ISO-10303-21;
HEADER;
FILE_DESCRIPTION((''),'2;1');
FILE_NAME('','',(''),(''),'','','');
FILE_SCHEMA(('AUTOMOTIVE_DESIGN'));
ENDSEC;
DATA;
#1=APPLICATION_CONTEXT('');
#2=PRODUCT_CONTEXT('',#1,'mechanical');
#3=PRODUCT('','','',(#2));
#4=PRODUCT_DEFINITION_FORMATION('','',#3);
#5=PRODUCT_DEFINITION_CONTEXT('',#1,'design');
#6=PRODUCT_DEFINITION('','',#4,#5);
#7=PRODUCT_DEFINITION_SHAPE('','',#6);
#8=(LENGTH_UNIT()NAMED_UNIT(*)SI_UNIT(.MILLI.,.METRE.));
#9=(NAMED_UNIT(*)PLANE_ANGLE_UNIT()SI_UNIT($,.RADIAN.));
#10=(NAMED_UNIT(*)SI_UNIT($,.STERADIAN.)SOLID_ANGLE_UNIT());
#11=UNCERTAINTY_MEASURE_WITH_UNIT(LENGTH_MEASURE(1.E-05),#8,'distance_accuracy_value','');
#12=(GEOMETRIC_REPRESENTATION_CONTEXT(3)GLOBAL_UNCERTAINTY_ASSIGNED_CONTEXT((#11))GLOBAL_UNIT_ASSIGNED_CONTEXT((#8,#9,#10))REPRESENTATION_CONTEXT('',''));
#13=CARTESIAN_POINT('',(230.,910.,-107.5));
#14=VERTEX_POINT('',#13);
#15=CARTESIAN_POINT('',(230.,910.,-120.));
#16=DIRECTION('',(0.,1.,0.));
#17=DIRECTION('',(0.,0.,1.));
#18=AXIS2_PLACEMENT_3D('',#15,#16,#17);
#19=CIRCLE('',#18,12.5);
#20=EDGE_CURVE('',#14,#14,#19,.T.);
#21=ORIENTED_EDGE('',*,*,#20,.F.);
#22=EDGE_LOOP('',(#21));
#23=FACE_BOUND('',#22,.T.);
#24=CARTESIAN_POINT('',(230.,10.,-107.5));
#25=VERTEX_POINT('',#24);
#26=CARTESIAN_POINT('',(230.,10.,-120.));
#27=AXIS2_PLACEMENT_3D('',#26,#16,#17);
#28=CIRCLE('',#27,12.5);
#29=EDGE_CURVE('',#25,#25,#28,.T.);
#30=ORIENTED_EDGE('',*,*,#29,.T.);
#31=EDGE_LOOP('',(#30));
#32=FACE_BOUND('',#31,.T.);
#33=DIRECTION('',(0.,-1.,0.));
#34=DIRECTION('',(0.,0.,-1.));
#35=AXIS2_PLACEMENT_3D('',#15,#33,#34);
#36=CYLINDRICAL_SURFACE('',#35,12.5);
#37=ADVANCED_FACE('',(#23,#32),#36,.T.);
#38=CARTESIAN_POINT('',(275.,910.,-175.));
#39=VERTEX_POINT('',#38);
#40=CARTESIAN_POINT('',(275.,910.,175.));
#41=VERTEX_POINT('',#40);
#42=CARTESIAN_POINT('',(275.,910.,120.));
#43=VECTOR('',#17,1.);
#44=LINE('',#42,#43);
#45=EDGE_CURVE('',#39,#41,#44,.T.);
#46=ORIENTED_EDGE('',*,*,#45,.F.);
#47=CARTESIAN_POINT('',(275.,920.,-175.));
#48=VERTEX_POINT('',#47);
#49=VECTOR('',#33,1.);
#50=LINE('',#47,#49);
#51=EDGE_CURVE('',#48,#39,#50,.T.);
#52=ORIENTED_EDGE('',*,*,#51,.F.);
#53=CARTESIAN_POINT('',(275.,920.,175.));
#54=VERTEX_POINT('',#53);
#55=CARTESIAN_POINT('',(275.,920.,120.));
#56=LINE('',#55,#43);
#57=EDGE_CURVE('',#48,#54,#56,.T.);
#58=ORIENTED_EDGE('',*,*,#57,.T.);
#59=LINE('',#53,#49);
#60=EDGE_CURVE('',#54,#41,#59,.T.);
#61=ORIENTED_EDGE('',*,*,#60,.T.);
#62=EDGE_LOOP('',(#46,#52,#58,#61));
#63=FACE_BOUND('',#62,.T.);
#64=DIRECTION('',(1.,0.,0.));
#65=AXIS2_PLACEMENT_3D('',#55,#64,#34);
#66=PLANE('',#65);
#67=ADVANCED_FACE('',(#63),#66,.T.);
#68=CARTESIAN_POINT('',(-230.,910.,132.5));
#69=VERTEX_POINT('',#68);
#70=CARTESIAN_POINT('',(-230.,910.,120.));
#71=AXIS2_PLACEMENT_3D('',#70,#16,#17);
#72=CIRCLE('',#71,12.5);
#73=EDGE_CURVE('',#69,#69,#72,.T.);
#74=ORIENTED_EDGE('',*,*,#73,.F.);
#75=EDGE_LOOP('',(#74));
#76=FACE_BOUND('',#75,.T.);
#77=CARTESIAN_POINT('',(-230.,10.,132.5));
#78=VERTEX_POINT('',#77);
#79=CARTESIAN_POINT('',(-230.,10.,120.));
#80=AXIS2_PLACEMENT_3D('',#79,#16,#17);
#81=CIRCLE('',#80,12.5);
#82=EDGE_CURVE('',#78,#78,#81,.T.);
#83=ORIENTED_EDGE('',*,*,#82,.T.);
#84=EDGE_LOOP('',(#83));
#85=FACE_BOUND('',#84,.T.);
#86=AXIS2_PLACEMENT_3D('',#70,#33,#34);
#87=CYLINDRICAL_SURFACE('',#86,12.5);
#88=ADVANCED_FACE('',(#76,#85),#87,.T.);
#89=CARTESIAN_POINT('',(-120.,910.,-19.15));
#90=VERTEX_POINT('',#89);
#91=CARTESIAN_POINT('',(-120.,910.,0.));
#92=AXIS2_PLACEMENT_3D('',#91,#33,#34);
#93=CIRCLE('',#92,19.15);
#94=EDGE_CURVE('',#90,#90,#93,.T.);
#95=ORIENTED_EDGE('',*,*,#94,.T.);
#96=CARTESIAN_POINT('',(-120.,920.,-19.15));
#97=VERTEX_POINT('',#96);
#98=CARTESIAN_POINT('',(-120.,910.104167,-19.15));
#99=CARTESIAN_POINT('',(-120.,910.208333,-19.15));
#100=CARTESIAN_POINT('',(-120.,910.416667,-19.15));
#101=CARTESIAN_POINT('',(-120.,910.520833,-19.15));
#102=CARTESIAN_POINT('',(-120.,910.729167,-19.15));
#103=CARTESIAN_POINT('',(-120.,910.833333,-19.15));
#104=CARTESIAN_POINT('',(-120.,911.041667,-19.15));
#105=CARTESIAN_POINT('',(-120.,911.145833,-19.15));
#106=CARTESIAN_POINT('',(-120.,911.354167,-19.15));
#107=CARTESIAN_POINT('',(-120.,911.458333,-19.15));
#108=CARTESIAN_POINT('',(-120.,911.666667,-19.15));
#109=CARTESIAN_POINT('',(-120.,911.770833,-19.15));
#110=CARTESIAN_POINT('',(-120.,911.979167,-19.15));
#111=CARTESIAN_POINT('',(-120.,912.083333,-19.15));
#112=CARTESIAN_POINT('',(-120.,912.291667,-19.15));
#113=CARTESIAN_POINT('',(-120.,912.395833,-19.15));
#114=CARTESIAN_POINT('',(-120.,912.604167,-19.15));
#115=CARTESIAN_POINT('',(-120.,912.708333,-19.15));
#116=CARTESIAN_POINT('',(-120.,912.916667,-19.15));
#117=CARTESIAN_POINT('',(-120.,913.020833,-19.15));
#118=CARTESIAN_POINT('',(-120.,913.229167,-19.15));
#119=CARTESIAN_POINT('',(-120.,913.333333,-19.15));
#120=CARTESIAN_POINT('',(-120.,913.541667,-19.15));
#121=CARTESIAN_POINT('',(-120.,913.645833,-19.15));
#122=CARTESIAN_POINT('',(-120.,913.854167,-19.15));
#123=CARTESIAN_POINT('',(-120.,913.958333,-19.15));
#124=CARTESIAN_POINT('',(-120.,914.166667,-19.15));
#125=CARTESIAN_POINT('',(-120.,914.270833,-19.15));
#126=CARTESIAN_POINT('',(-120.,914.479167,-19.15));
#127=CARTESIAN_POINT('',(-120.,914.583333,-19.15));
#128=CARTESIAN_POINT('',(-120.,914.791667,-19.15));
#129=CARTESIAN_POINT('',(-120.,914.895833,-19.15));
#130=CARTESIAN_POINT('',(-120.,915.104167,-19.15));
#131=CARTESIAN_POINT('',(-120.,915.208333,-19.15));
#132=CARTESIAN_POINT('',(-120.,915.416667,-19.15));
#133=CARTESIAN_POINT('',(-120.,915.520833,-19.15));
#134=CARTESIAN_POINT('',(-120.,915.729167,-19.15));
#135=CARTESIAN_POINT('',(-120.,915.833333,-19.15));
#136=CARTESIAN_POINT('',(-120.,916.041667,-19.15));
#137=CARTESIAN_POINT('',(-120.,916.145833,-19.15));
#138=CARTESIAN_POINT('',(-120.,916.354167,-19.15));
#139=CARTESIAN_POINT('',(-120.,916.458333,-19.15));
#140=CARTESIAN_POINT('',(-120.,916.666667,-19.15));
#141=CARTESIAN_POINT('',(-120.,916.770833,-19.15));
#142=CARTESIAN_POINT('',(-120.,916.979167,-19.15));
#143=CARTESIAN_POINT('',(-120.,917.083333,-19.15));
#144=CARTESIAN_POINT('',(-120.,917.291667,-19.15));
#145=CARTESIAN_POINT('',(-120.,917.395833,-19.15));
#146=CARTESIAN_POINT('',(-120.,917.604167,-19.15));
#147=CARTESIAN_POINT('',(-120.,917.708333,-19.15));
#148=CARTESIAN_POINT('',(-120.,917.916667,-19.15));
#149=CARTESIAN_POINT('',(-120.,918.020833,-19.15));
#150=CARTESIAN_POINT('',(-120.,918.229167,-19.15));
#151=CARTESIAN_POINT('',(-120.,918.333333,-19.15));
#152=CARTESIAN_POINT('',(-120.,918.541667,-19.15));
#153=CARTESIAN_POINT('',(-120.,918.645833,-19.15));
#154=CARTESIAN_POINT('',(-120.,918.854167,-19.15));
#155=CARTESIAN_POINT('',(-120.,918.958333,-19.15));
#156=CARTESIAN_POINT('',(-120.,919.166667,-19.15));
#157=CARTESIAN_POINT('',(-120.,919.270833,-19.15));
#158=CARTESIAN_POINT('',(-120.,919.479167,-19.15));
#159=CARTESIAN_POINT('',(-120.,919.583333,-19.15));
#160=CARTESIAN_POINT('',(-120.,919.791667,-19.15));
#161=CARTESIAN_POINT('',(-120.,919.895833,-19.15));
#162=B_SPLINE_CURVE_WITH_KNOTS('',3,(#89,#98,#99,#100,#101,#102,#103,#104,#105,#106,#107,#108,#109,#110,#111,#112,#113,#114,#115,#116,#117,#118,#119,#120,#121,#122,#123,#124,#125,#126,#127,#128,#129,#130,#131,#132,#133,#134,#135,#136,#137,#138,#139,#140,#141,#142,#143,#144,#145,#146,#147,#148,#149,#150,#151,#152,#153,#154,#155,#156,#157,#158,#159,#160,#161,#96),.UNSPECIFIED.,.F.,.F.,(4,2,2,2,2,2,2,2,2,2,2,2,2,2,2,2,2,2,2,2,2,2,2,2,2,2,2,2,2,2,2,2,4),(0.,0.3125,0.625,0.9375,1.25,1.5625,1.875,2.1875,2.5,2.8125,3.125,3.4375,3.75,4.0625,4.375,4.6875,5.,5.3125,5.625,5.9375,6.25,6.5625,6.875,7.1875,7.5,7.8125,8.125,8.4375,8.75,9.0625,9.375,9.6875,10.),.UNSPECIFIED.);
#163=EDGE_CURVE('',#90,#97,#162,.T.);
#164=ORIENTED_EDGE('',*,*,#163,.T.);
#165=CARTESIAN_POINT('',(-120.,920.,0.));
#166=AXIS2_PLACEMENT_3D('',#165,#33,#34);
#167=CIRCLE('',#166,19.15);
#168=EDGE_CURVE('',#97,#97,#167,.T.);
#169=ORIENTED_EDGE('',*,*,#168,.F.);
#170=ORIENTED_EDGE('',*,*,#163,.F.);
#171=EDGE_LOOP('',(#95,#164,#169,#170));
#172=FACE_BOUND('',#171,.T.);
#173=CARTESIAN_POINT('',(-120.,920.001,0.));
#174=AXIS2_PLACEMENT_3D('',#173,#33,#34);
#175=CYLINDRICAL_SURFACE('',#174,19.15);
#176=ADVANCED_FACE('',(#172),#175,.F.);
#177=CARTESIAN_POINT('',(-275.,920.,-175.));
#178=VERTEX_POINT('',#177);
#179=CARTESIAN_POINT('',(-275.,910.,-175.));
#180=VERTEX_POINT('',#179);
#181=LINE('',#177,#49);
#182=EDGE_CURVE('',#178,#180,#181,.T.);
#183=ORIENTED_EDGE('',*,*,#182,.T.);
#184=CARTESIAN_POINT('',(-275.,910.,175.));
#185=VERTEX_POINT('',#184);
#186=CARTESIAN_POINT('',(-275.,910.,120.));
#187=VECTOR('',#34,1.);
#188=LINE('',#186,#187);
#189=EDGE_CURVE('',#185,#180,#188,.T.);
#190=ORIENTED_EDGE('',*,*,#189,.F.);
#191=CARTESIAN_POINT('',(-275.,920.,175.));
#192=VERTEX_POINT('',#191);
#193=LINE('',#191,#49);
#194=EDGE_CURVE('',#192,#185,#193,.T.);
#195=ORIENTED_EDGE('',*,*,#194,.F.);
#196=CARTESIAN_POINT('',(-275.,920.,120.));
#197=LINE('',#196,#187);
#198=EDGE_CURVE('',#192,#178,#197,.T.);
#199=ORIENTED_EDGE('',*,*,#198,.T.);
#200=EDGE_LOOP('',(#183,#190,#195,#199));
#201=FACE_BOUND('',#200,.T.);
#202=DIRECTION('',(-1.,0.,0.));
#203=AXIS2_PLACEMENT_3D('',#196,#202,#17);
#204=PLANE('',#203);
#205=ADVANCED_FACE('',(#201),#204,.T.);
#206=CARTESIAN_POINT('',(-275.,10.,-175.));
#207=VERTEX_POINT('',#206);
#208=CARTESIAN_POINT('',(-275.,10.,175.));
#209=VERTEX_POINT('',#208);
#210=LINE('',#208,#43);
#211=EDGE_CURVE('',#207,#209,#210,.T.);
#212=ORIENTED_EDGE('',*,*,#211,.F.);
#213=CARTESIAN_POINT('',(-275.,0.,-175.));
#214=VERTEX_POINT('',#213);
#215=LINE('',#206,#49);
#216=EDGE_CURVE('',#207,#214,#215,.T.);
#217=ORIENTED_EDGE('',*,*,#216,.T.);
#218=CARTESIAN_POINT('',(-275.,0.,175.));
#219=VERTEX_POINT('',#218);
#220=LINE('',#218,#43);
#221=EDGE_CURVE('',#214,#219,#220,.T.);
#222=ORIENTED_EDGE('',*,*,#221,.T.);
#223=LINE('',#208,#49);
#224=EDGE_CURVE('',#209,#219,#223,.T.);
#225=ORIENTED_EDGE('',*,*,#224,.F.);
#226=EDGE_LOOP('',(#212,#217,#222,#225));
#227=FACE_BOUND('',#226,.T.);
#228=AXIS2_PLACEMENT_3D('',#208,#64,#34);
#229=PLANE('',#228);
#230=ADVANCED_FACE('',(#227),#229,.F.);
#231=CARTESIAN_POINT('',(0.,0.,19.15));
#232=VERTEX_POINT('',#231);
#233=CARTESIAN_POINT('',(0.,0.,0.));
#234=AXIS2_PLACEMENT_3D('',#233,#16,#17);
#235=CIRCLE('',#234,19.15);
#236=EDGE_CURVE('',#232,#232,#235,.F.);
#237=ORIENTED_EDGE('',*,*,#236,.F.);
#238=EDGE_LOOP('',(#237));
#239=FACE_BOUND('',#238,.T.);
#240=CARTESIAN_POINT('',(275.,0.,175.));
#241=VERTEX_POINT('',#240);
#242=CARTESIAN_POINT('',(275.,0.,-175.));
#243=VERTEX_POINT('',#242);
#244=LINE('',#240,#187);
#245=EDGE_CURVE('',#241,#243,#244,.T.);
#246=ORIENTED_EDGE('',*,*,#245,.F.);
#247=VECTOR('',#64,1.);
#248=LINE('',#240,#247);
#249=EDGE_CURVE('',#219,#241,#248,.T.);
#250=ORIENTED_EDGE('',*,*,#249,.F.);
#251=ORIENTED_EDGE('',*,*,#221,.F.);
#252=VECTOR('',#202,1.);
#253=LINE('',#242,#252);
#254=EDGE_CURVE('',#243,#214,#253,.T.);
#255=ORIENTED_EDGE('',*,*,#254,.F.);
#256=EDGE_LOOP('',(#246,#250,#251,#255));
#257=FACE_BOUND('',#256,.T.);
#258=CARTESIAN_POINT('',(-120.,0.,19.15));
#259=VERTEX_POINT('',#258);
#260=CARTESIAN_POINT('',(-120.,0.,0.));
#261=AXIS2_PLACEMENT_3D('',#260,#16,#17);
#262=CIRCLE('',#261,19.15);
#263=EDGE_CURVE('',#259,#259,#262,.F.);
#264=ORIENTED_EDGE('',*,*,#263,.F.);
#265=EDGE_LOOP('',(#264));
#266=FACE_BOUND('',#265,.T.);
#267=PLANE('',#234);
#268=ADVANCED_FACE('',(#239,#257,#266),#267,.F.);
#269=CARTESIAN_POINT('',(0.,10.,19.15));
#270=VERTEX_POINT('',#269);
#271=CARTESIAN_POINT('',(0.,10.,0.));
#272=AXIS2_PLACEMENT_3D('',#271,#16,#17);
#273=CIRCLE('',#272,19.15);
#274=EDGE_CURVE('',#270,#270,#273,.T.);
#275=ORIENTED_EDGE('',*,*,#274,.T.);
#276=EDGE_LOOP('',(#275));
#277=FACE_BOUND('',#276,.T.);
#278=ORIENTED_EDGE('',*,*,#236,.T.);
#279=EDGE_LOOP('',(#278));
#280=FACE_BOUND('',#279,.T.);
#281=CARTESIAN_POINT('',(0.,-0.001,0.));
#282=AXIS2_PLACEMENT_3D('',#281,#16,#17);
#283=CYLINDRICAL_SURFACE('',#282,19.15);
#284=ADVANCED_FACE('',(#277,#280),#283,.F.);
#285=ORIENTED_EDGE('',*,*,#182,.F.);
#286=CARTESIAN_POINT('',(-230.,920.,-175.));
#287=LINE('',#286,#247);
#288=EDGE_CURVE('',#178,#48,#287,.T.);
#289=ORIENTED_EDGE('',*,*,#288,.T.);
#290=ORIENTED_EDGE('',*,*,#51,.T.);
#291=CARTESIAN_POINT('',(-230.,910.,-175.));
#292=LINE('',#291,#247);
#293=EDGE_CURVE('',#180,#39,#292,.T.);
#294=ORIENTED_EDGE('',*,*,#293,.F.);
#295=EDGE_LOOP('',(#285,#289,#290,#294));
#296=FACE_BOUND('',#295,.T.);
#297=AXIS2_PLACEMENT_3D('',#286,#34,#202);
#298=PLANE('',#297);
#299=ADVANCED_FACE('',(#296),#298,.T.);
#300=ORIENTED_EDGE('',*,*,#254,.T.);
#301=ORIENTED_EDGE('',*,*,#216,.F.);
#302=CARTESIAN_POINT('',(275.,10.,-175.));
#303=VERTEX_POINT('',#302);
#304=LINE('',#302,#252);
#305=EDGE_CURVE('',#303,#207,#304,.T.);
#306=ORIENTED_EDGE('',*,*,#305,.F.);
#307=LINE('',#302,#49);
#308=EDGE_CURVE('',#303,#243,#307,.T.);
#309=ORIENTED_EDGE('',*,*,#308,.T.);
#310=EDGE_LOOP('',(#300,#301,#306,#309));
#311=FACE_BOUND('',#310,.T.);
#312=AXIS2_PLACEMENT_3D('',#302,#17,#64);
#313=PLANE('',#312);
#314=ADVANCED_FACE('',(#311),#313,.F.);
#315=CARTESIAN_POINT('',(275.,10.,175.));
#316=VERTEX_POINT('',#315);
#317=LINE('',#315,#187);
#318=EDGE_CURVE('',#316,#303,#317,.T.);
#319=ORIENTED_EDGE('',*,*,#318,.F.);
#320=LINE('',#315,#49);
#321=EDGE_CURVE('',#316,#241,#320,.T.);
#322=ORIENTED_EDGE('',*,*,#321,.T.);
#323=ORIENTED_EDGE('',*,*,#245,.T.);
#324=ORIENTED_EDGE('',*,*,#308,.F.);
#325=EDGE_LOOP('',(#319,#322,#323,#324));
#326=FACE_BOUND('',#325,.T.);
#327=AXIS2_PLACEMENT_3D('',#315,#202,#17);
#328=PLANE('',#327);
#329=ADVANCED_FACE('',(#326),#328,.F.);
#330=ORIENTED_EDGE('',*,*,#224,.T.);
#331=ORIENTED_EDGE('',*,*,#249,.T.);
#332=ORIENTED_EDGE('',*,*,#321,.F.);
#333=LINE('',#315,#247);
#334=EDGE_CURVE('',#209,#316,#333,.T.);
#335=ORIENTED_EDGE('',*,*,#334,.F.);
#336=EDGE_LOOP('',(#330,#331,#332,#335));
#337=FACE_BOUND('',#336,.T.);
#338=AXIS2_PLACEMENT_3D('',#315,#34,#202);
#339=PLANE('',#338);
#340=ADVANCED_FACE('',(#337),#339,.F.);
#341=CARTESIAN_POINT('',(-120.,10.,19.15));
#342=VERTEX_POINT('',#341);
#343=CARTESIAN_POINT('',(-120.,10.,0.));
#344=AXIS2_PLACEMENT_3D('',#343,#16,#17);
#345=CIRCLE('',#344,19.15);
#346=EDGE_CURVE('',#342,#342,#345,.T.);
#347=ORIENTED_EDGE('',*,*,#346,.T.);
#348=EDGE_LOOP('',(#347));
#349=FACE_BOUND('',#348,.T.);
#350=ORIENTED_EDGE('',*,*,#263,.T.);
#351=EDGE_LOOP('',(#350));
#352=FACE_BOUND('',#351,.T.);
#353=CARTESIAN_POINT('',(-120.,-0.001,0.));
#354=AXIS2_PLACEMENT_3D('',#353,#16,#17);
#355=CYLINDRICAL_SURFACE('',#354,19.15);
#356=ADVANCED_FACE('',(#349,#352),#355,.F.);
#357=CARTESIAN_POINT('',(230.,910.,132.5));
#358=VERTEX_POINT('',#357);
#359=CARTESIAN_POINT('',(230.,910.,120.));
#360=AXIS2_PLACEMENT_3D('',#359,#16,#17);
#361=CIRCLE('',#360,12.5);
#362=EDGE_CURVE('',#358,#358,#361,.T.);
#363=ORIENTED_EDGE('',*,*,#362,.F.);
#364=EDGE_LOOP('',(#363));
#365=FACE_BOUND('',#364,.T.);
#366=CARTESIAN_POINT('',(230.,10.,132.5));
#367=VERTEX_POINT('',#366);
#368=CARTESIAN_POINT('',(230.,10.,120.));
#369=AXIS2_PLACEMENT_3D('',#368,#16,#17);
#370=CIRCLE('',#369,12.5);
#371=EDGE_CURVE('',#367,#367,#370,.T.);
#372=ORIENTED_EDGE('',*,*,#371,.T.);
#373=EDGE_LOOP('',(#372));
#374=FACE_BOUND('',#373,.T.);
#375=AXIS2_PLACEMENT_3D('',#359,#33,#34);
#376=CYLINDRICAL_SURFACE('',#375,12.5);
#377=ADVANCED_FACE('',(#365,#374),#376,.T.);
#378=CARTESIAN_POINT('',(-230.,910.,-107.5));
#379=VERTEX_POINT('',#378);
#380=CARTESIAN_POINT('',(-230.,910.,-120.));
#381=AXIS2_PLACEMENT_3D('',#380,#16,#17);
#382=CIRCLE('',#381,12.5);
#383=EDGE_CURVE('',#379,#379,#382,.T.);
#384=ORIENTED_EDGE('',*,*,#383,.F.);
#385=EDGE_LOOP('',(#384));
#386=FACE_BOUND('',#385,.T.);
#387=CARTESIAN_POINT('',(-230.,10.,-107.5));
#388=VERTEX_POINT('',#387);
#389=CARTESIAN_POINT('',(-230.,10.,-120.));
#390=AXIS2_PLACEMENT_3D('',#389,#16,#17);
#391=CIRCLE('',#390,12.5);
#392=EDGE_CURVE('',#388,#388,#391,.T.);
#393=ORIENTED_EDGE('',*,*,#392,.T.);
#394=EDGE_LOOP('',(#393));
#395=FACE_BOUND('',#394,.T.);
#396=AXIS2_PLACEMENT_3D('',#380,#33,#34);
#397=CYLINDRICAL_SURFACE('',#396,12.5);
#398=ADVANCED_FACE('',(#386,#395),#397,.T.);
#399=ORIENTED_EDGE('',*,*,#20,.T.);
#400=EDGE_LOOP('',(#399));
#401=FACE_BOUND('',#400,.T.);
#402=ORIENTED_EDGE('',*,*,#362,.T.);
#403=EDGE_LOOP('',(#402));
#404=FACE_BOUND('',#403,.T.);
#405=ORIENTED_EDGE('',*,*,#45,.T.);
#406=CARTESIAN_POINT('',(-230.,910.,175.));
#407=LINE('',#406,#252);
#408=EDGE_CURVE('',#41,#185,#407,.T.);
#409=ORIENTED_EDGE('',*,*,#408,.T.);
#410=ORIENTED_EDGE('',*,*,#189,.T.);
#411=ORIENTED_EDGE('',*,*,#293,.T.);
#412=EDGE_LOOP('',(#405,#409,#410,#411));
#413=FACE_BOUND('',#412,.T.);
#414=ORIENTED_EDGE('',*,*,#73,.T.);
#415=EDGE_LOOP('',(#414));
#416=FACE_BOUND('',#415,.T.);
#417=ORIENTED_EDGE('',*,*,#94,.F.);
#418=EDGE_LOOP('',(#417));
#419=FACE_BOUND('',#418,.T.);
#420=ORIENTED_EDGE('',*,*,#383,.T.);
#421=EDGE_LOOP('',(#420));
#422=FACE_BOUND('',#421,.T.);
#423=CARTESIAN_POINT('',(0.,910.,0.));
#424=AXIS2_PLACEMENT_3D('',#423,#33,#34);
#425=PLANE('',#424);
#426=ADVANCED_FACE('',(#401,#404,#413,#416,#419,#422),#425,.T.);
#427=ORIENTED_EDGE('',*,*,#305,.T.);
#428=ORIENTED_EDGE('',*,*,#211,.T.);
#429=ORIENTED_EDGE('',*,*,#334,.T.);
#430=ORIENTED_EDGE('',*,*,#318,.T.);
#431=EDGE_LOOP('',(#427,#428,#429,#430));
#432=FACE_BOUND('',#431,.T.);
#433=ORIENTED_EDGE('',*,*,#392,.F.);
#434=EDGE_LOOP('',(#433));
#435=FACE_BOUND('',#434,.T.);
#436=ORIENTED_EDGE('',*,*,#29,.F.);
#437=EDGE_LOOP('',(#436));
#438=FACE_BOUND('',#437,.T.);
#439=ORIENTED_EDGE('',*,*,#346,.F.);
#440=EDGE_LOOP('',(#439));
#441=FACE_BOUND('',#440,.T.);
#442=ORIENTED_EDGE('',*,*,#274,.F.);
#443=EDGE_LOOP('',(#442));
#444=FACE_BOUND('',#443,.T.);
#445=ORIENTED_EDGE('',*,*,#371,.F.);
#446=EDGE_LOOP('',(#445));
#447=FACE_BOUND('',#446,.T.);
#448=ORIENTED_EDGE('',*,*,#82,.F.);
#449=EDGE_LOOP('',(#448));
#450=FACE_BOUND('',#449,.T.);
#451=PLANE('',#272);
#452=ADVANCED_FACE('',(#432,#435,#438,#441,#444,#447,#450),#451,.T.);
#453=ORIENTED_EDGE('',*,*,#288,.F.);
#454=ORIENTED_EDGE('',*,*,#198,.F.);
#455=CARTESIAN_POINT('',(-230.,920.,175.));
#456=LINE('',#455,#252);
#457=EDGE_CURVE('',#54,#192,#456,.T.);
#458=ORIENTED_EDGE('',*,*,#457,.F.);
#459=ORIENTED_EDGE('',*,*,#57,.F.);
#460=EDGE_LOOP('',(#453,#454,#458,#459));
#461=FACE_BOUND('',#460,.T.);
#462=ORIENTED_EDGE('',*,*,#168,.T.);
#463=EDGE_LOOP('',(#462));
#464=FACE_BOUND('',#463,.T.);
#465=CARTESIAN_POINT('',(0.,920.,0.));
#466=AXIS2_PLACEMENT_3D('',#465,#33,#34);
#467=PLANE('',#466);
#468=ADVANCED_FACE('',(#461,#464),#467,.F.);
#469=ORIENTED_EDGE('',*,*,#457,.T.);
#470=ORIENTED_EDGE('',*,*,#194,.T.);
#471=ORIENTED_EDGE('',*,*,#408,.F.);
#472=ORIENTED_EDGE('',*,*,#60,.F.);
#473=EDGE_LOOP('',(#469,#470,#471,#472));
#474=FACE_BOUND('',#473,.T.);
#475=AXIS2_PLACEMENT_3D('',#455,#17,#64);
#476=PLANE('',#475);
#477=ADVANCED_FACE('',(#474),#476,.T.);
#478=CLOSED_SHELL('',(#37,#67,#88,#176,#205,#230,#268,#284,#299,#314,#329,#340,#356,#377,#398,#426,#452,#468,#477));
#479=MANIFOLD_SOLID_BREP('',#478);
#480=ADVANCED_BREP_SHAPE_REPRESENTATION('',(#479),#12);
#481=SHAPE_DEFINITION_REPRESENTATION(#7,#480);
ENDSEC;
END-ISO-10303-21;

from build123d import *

# Parameters (mm, degrees)
SKETCH1_W           = 550
SKETCH1_H           = 350
BOSS_EXTRUDE1_DEPTH = 10
SKETCH2_R           = 12.5
BOSS_EXTRUDE2_DEPTH = 900
BOSS_EXTRUDE3_START = 910
SKETCH1_2_W         = 550
SKETCH1_2_H         = 350
BOSS_EXTRUDE3_DEPTH = 10
CUT_EXTRUDE1_START  = -920
SKETCH3_R           = 19.15
CUT_EXTRUDE1_DEPTH  = 10
LPATTERN1_COUNT     = 2
LPATTERN1_PITCH     = 120
MIRROR1_START       = 910
MIRROR1_OUTLINE_R   = 19.15
MIRROR1_DEPTH       = 10


# Read off the part's stored shape, not the designer's step: Mirror1
with BuildPart() as part:
    # Sketch1 → Boss-Extrude1 (new body)
    with BuildSketch(Plane(origin=(0, 0, 0), x_dir=(1, 0, 0), z_dir=(0, 1, 0))):
        Rectangle(SKETCH1_W, SKETCH1_H)
    extrude(amount=BOSS_EXTRUDE1_DEPTH)

    # Sketch2 → Boss-Extrude2 (add)
    with BuildSketch(Plane(origin=(0, 10, 0), x_dir=(1, 0, 0), z_dir=(0, 1, 0))):
        with Locations(Location((-230, 120, 0), (0, 0, 270))):
            Circle(SKETCH2_R)
        with Locations(Location((-230, -120, 0), (0, 0, 270))):
            Circle(SKETCH2_R)
        with Locations(Location((230, -120, 0), (0, 0, 270))):
            Circle(SKETCH2_R)
        with Locations(Location((230, 120, 0), (0, 0, 270))):
            Circle(SKETCH2_R)
    extrude(amount=BOSS_EXTRUDE2_DEPTH)

    # Sketch1<2> → Boss-Extrude3 (add)
    with BuildSketch(Plane(origin=(0, 0, 0), x_dir=(1, 0, 0), z_dir=(0, 1, 0)).offset(BOSS_EXTRUDE3_START)):
        Rectangle(SKETCH1_2_W, SKETCH1_2_H)
    extrude(amount=BOSS_EXTRUDE3_DEPTH)

    # Sketch3 → Cut-Extrude1 (cut)
    with BuildSketch(Plane(origin=(0, 920, 0), x_dir=(1, 0, 0), z_dir=(0, 1, 0)).offset(CUT_EXTRUDE1_START)):
        with Locations(Location((-120, 0, 0), (0, 0, 270))):
            Circle(SKETCH3_R)
    cut_extrude1 = extrude(amount=CUT_EXTRUDE1_DEPTH, mode=Mode.SUBTRACT)

    # LPattern1: Cut-Extrude1 ×2
    with Locations(*[(i * LPATTERN1_PITCH, 0, 0) for i in range(1, LPATTERN1_COUNT)]):
        add(cut_extrude1, mode=Mode.SUBTRACT)

    # Mirror1 outline → Mirror1 (cut)
    with BuildSketch(Plane(origin=(0, 0, 0), x_dir=(1, 0, 0), z_dir=(0, 1, 0)).offset(MIRROR1_START)):
        with Locations((-120, 0)):
            Circle(MIRROR1_OUTLINE_R)
    extrude(amount=MIRROR1_DEPTH, mode=Mode.SUBTRACT)


solid = part.part
